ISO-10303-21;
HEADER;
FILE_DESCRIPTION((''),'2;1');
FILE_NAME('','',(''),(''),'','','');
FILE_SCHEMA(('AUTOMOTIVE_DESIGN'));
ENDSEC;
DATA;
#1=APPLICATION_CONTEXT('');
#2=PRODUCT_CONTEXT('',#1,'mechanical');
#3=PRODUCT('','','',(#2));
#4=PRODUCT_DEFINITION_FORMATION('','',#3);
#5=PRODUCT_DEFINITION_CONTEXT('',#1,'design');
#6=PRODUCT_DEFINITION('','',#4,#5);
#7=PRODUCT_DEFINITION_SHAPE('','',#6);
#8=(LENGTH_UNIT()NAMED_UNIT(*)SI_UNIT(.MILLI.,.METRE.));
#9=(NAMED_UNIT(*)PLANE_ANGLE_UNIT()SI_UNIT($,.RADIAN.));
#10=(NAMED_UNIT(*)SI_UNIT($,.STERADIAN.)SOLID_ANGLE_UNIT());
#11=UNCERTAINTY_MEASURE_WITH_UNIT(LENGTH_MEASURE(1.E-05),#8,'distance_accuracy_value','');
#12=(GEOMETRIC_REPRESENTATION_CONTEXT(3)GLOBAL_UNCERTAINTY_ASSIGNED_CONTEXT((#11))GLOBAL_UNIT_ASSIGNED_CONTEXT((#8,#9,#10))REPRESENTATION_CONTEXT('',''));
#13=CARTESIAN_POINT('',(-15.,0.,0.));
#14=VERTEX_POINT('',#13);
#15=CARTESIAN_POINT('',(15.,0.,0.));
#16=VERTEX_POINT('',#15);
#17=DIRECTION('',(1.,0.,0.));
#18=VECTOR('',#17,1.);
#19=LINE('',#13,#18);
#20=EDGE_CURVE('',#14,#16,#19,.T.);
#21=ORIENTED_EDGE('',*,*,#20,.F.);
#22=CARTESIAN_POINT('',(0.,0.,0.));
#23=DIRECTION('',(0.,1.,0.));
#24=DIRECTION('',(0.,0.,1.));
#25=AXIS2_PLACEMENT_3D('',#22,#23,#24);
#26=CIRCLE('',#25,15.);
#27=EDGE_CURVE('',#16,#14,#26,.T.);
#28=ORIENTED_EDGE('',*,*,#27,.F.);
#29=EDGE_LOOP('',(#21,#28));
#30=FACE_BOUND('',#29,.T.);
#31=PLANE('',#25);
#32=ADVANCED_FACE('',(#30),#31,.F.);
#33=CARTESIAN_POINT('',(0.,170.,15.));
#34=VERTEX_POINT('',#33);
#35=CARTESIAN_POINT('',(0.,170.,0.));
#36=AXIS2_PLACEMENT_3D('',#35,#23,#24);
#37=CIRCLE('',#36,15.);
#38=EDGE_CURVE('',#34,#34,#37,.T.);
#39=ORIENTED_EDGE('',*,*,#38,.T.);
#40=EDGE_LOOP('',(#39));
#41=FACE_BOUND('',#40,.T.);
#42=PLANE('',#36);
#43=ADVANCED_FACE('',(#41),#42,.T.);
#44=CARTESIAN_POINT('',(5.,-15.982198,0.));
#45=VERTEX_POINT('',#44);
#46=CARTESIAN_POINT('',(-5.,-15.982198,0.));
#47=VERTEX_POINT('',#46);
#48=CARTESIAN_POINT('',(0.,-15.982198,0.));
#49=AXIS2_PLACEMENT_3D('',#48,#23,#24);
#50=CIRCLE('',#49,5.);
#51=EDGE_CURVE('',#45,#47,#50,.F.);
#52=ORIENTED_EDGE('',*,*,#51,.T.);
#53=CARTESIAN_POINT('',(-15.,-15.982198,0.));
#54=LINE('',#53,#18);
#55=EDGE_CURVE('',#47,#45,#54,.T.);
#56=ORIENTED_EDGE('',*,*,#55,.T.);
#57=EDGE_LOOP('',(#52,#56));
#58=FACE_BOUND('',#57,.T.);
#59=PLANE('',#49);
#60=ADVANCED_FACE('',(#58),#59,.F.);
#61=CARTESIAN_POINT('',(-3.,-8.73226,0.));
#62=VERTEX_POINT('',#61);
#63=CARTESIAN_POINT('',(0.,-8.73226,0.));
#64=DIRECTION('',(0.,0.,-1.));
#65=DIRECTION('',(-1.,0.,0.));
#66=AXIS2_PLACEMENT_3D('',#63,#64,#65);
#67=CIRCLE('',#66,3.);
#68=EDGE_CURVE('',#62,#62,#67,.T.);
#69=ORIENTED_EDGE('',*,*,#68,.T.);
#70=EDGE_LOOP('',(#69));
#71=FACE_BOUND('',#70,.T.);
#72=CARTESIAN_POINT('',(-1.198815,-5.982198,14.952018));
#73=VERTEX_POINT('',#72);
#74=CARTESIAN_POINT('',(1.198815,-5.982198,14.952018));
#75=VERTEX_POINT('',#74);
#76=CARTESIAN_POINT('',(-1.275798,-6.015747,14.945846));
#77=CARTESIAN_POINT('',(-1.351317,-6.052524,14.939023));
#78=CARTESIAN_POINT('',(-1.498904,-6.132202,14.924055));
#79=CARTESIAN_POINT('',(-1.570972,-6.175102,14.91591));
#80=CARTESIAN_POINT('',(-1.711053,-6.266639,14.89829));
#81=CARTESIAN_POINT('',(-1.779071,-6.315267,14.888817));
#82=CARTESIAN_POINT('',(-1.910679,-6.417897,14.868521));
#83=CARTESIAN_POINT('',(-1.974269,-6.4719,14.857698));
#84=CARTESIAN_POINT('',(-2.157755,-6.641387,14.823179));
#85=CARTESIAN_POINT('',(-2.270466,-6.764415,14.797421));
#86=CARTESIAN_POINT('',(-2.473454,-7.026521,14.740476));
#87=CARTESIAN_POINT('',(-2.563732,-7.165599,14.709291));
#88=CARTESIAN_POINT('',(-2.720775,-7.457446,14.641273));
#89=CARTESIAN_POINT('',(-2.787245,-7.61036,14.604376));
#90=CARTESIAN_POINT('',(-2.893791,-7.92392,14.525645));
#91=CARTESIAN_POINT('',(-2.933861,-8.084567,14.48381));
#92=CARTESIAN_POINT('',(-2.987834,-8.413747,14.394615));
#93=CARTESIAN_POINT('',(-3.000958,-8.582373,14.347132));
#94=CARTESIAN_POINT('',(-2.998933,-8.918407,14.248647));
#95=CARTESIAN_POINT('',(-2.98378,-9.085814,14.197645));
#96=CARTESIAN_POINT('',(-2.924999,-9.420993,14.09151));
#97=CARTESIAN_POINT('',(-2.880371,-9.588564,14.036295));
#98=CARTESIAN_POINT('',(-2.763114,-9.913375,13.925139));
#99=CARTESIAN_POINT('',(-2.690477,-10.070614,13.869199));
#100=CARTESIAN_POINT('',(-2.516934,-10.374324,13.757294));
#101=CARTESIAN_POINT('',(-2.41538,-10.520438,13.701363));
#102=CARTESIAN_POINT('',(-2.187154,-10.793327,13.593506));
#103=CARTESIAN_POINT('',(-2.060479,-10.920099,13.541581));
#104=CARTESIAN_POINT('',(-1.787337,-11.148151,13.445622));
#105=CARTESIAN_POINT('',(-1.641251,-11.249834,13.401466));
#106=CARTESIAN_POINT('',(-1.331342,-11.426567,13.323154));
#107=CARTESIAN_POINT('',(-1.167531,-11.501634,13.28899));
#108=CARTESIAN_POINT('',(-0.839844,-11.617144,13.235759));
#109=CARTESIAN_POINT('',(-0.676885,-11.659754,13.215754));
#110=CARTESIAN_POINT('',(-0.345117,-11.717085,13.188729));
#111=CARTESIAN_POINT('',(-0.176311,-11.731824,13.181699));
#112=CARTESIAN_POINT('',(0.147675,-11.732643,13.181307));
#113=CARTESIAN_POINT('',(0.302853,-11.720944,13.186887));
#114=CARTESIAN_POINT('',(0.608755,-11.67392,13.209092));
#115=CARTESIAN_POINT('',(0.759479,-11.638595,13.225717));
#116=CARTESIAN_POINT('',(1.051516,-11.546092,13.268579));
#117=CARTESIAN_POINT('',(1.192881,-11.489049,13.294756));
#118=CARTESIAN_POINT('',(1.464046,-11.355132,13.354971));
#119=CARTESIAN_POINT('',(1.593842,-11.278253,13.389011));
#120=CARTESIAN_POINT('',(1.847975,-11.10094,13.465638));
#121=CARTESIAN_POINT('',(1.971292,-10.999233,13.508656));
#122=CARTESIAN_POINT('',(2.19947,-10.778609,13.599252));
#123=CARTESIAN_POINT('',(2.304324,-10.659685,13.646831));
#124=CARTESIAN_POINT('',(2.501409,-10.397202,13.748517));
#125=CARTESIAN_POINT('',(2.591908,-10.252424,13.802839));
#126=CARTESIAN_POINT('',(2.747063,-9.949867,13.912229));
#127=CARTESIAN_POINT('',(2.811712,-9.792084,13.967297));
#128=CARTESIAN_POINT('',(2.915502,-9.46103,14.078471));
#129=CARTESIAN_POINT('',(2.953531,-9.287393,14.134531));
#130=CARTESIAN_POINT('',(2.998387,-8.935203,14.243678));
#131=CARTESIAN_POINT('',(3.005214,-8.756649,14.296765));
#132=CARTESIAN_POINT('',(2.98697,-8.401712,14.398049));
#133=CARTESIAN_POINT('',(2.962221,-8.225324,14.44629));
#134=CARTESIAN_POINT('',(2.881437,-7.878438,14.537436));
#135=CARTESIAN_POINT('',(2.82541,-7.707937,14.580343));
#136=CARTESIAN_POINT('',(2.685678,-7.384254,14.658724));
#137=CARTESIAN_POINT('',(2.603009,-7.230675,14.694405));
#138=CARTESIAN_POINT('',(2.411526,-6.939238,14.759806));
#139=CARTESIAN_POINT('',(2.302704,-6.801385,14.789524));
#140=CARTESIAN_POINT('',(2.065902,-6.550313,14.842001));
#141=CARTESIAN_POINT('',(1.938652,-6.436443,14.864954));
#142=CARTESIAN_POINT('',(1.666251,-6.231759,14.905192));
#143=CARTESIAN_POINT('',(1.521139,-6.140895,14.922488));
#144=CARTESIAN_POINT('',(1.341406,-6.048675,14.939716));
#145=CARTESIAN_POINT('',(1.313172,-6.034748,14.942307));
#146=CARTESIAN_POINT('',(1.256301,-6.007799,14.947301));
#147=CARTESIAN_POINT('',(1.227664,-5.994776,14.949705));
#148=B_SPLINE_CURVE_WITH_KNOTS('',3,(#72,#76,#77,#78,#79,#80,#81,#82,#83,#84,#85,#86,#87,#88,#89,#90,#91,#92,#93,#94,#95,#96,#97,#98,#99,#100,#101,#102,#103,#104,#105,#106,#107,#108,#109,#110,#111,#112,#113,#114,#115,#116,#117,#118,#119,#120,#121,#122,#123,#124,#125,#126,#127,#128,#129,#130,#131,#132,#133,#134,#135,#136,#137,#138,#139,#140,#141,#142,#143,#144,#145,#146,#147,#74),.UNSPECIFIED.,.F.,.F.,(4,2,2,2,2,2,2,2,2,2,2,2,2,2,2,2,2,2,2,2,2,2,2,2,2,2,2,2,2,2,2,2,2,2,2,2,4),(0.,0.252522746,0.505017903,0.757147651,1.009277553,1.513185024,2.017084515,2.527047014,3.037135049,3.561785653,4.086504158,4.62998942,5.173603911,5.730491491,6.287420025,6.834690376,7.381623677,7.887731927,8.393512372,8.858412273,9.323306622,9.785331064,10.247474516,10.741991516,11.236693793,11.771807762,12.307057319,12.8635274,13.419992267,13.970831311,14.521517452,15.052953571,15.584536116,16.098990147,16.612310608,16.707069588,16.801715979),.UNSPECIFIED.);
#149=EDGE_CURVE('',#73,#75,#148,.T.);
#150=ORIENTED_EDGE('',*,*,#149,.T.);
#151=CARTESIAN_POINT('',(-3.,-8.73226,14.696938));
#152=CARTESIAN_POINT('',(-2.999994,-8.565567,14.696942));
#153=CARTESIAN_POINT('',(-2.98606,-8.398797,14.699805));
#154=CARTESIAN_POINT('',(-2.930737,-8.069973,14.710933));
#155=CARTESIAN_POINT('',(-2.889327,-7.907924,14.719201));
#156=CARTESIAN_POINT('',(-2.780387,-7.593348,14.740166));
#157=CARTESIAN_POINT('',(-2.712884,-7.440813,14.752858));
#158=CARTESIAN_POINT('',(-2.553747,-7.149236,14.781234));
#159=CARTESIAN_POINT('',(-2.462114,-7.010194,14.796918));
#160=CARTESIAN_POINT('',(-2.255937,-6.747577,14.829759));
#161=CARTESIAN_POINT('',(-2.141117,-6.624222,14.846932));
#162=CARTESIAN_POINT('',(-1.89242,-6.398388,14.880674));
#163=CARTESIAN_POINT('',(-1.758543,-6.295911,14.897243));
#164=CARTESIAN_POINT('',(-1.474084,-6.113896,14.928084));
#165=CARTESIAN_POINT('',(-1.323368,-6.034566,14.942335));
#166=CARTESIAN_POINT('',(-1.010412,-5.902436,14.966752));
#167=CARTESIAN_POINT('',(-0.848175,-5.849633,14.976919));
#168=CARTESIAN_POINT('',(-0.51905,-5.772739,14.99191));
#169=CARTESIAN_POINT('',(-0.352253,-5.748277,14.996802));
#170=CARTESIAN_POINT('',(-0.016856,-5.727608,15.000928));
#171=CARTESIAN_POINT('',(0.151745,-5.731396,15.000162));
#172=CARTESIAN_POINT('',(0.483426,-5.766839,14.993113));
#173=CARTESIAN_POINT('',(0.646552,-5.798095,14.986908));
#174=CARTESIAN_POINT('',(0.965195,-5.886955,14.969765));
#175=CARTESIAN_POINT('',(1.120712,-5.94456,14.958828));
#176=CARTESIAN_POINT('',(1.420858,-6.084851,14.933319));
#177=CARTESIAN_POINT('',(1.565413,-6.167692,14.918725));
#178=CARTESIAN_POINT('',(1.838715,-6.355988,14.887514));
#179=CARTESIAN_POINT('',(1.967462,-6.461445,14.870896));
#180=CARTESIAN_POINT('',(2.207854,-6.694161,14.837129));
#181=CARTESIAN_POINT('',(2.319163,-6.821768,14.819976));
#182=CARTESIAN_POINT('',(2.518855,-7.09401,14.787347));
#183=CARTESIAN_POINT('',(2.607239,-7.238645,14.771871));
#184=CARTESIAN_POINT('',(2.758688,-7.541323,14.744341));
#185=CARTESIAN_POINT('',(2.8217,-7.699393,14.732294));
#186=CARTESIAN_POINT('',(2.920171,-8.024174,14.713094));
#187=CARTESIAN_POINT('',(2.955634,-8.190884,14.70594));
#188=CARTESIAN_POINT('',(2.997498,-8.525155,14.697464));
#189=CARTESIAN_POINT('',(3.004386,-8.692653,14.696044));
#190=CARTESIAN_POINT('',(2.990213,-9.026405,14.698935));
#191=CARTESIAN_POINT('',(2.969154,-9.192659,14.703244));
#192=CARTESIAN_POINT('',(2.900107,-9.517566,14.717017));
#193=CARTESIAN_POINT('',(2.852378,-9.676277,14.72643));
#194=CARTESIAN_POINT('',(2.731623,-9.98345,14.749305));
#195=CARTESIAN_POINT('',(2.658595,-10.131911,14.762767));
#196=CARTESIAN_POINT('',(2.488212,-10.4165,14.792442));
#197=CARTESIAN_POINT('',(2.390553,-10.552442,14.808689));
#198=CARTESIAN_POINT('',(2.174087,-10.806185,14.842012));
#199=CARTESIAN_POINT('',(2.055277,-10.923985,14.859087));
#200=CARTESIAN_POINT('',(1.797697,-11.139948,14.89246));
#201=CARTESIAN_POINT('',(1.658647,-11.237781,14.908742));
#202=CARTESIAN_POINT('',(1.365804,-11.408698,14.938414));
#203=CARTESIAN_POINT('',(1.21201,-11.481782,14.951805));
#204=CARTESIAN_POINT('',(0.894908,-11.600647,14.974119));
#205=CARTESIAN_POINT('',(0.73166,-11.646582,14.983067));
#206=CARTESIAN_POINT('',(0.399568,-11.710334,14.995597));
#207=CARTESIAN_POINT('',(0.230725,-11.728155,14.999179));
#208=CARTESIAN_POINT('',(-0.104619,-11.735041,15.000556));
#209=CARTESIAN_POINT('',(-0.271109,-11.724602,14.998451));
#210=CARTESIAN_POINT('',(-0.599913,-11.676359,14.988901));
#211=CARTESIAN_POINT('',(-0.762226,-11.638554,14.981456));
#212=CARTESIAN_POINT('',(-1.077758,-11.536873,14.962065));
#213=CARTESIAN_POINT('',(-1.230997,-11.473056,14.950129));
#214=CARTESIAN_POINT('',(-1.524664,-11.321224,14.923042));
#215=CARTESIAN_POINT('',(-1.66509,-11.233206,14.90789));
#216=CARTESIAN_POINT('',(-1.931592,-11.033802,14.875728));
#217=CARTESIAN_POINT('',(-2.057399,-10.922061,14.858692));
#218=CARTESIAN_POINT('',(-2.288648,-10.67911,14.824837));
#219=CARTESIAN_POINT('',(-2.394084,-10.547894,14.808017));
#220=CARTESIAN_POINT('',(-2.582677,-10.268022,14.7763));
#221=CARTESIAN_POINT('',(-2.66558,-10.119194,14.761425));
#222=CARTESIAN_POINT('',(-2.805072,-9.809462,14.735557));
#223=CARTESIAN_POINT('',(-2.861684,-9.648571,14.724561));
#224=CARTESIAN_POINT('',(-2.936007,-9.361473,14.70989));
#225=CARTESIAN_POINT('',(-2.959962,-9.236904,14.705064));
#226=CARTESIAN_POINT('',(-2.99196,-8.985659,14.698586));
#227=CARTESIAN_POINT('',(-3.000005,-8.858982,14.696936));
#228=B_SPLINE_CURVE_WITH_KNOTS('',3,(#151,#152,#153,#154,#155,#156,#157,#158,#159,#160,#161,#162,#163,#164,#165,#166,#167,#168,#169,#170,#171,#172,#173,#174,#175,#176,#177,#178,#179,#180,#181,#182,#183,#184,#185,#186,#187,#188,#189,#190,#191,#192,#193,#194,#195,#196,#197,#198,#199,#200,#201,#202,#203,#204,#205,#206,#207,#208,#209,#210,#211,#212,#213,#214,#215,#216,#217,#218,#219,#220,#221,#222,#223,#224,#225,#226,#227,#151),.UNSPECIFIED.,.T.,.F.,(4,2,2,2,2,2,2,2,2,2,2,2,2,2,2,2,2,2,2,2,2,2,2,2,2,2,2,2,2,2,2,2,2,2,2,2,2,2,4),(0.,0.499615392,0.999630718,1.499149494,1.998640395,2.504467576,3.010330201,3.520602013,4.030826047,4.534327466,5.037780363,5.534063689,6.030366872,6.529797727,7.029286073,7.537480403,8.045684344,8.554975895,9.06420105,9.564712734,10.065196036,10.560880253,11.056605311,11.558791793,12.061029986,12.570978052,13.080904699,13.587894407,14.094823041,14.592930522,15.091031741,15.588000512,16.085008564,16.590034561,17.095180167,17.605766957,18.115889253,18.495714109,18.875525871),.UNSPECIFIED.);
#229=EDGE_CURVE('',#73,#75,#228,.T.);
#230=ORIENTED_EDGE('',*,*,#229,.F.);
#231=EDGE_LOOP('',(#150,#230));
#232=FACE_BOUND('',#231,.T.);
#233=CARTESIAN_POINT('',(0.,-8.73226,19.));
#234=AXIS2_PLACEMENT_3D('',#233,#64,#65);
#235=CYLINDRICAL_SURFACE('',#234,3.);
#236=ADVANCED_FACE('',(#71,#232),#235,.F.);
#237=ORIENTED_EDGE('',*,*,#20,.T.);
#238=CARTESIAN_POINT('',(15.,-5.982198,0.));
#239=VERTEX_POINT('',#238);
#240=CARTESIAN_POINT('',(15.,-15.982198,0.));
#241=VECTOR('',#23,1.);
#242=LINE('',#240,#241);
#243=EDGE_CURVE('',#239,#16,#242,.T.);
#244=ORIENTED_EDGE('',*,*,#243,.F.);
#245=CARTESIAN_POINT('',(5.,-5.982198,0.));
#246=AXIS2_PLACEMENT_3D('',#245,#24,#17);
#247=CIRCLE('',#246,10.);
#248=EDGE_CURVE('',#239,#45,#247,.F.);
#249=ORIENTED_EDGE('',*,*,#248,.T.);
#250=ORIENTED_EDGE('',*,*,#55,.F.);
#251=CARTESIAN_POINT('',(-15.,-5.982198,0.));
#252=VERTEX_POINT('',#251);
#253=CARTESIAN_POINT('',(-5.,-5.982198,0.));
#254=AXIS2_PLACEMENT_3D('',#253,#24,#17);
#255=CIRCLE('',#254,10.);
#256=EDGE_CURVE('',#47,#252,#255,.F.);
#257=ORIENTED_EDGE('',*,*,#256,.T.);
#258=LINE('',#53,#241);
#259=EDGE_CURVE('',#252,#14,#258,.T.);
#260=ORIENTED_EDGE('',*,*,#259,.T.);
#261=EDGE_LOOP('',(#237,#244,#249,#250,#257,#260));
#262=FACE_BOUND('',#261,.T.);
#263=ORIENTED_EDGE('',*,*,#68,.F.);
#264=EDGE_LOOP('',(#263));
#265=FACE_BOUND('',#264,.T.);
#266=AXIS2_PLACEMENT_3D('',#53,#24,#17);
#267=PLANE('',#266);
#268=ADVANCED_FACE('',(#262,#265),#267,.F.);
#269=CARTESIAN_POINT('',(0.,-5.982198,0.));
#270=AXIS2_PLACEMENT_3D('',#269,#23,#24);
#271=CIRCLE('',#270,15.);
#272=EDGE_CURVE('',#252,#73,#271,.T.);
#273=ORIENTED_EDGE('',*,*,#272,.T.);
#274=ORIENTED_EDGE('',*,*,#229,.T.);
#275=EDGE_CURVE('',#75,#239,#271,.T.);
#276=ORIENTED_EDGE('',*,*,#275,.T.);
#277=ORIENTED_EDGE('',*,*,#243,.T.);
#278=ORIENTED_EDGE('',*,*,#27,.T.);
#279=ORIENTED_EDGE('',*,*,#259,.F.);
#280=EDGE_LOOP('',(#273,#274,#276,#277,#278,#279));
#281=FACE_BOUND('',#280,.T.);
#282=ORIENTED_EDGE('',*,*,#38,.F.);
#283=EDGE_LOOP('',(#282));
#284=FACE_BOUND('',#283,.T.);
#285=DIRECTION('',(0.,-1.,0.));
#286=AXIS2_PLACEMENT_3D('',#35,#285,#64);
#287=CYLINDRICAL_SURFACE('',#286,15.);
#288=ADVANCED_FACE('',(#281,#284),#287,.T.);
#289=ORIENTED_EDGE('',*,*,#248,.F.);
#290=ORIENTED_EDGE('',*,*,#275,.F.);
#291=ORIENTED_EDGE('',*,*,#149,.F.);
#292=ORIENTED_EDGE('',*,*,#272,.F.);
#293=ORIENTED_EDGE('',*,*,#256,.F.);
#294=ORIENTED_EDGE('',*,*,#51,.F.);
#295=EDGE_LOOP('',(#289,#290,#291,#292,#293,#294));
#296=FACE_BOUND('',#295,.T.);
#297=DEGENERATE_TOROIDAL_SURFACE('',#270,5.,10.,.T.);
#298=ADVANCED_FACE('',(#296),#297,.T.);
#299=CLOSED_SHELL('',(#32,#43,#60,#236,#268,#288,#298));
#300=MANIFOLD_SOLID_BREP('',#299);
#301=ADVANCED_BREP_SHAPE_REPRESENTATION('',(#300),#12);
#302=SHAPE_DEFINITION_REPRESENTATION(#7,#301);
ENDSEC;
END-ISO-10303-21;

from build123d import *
from build123d.topology import SkipClean

# Parameters (mm, degrees)
SKETCH2_R           = 15
BOSS_EXTRUDE1_DEPTH = 170
BOSS_EXTRUDE2_START = 15.982197964
BOSS_EXTRUDE2_DEPTH = 15.982197964
SKETCH5_R           = 3
CUT_EXTRUDE1_DEPTH  = 19
FILLET5_R           = 10


with BuildPart() as part:
    # Sketch2 → Boss-Extrude1 (new body)
    with BuildSketch(Plane(origin=(0, 0, 0), x_dir=(1, 0, 0), z_dir=(0, 1, 0))):
        with Locations(Location((0, 0, 0), (0, 0, 270))):
            Circle(SKETCH2_R)
    extrude(amount=BOSS_EXTRUDE1_DEPTH)

    # Sketch3 → Boss-Extrude2 (add)
    with SkipClean():  # the faces are left unmerged after this step: merging them gives an invalid solid
        with BuildSketch(Plane.XZ.offset(BOSS_EXTRUDE2_START)):
            with BuildLine():
                Line((-15, 0), (15, 0))
                ThreePointArc((15, 0), (0, 15), (-15, 0))
            make_face()
        extrude(amount=-BOSS_EXTRUDE2_DEPTH)

    # Sketch5 → Cut-Extrude1 (cut)
    with SkipClean():  # the faces are left unmerged after this step: merging them gives an invalid solid
        with BuildSketch(Plane(origin=(0, 0, 0), x_dir=(-1, 0, 0), z_dir=(0, 0, -1))):
            with Locations((0, -8.732260388)):
                Circle(SKETCH5_R)
        extrude(amount=-CUT_EXTRUDE1_DEPTH, mode=Mode.SUBTRACT)

    # Fillet5
    # the kernel refuses this fillet: 10 mm, written as the material it takes off along each edge
    with BuildSketch(Plane(origin=(0, -15.982197964, 0), x_dir=(0.0031415874858799616, 0, -0.9999950652018581), z_dir=(-0.9999950652018581, 0, -0.0031415874858799616))) as fillet5_piece_1:
        with BuildLine():
            CenterArc((15 - FILLET5_R, -FILLET5_R), FILLET5_R, 0, 90)
            Line((15 - FILLET5_R, 0), (15, 0))
            Line((15, 0), (15, -FILLET5_R))
        make_face()
    revolve(axis=Axis((0, -15.982197964, 0), (0, -1, 0)), revolution_arc=359.64, mode=Mode.SUBTRACT)


solid = part.part
